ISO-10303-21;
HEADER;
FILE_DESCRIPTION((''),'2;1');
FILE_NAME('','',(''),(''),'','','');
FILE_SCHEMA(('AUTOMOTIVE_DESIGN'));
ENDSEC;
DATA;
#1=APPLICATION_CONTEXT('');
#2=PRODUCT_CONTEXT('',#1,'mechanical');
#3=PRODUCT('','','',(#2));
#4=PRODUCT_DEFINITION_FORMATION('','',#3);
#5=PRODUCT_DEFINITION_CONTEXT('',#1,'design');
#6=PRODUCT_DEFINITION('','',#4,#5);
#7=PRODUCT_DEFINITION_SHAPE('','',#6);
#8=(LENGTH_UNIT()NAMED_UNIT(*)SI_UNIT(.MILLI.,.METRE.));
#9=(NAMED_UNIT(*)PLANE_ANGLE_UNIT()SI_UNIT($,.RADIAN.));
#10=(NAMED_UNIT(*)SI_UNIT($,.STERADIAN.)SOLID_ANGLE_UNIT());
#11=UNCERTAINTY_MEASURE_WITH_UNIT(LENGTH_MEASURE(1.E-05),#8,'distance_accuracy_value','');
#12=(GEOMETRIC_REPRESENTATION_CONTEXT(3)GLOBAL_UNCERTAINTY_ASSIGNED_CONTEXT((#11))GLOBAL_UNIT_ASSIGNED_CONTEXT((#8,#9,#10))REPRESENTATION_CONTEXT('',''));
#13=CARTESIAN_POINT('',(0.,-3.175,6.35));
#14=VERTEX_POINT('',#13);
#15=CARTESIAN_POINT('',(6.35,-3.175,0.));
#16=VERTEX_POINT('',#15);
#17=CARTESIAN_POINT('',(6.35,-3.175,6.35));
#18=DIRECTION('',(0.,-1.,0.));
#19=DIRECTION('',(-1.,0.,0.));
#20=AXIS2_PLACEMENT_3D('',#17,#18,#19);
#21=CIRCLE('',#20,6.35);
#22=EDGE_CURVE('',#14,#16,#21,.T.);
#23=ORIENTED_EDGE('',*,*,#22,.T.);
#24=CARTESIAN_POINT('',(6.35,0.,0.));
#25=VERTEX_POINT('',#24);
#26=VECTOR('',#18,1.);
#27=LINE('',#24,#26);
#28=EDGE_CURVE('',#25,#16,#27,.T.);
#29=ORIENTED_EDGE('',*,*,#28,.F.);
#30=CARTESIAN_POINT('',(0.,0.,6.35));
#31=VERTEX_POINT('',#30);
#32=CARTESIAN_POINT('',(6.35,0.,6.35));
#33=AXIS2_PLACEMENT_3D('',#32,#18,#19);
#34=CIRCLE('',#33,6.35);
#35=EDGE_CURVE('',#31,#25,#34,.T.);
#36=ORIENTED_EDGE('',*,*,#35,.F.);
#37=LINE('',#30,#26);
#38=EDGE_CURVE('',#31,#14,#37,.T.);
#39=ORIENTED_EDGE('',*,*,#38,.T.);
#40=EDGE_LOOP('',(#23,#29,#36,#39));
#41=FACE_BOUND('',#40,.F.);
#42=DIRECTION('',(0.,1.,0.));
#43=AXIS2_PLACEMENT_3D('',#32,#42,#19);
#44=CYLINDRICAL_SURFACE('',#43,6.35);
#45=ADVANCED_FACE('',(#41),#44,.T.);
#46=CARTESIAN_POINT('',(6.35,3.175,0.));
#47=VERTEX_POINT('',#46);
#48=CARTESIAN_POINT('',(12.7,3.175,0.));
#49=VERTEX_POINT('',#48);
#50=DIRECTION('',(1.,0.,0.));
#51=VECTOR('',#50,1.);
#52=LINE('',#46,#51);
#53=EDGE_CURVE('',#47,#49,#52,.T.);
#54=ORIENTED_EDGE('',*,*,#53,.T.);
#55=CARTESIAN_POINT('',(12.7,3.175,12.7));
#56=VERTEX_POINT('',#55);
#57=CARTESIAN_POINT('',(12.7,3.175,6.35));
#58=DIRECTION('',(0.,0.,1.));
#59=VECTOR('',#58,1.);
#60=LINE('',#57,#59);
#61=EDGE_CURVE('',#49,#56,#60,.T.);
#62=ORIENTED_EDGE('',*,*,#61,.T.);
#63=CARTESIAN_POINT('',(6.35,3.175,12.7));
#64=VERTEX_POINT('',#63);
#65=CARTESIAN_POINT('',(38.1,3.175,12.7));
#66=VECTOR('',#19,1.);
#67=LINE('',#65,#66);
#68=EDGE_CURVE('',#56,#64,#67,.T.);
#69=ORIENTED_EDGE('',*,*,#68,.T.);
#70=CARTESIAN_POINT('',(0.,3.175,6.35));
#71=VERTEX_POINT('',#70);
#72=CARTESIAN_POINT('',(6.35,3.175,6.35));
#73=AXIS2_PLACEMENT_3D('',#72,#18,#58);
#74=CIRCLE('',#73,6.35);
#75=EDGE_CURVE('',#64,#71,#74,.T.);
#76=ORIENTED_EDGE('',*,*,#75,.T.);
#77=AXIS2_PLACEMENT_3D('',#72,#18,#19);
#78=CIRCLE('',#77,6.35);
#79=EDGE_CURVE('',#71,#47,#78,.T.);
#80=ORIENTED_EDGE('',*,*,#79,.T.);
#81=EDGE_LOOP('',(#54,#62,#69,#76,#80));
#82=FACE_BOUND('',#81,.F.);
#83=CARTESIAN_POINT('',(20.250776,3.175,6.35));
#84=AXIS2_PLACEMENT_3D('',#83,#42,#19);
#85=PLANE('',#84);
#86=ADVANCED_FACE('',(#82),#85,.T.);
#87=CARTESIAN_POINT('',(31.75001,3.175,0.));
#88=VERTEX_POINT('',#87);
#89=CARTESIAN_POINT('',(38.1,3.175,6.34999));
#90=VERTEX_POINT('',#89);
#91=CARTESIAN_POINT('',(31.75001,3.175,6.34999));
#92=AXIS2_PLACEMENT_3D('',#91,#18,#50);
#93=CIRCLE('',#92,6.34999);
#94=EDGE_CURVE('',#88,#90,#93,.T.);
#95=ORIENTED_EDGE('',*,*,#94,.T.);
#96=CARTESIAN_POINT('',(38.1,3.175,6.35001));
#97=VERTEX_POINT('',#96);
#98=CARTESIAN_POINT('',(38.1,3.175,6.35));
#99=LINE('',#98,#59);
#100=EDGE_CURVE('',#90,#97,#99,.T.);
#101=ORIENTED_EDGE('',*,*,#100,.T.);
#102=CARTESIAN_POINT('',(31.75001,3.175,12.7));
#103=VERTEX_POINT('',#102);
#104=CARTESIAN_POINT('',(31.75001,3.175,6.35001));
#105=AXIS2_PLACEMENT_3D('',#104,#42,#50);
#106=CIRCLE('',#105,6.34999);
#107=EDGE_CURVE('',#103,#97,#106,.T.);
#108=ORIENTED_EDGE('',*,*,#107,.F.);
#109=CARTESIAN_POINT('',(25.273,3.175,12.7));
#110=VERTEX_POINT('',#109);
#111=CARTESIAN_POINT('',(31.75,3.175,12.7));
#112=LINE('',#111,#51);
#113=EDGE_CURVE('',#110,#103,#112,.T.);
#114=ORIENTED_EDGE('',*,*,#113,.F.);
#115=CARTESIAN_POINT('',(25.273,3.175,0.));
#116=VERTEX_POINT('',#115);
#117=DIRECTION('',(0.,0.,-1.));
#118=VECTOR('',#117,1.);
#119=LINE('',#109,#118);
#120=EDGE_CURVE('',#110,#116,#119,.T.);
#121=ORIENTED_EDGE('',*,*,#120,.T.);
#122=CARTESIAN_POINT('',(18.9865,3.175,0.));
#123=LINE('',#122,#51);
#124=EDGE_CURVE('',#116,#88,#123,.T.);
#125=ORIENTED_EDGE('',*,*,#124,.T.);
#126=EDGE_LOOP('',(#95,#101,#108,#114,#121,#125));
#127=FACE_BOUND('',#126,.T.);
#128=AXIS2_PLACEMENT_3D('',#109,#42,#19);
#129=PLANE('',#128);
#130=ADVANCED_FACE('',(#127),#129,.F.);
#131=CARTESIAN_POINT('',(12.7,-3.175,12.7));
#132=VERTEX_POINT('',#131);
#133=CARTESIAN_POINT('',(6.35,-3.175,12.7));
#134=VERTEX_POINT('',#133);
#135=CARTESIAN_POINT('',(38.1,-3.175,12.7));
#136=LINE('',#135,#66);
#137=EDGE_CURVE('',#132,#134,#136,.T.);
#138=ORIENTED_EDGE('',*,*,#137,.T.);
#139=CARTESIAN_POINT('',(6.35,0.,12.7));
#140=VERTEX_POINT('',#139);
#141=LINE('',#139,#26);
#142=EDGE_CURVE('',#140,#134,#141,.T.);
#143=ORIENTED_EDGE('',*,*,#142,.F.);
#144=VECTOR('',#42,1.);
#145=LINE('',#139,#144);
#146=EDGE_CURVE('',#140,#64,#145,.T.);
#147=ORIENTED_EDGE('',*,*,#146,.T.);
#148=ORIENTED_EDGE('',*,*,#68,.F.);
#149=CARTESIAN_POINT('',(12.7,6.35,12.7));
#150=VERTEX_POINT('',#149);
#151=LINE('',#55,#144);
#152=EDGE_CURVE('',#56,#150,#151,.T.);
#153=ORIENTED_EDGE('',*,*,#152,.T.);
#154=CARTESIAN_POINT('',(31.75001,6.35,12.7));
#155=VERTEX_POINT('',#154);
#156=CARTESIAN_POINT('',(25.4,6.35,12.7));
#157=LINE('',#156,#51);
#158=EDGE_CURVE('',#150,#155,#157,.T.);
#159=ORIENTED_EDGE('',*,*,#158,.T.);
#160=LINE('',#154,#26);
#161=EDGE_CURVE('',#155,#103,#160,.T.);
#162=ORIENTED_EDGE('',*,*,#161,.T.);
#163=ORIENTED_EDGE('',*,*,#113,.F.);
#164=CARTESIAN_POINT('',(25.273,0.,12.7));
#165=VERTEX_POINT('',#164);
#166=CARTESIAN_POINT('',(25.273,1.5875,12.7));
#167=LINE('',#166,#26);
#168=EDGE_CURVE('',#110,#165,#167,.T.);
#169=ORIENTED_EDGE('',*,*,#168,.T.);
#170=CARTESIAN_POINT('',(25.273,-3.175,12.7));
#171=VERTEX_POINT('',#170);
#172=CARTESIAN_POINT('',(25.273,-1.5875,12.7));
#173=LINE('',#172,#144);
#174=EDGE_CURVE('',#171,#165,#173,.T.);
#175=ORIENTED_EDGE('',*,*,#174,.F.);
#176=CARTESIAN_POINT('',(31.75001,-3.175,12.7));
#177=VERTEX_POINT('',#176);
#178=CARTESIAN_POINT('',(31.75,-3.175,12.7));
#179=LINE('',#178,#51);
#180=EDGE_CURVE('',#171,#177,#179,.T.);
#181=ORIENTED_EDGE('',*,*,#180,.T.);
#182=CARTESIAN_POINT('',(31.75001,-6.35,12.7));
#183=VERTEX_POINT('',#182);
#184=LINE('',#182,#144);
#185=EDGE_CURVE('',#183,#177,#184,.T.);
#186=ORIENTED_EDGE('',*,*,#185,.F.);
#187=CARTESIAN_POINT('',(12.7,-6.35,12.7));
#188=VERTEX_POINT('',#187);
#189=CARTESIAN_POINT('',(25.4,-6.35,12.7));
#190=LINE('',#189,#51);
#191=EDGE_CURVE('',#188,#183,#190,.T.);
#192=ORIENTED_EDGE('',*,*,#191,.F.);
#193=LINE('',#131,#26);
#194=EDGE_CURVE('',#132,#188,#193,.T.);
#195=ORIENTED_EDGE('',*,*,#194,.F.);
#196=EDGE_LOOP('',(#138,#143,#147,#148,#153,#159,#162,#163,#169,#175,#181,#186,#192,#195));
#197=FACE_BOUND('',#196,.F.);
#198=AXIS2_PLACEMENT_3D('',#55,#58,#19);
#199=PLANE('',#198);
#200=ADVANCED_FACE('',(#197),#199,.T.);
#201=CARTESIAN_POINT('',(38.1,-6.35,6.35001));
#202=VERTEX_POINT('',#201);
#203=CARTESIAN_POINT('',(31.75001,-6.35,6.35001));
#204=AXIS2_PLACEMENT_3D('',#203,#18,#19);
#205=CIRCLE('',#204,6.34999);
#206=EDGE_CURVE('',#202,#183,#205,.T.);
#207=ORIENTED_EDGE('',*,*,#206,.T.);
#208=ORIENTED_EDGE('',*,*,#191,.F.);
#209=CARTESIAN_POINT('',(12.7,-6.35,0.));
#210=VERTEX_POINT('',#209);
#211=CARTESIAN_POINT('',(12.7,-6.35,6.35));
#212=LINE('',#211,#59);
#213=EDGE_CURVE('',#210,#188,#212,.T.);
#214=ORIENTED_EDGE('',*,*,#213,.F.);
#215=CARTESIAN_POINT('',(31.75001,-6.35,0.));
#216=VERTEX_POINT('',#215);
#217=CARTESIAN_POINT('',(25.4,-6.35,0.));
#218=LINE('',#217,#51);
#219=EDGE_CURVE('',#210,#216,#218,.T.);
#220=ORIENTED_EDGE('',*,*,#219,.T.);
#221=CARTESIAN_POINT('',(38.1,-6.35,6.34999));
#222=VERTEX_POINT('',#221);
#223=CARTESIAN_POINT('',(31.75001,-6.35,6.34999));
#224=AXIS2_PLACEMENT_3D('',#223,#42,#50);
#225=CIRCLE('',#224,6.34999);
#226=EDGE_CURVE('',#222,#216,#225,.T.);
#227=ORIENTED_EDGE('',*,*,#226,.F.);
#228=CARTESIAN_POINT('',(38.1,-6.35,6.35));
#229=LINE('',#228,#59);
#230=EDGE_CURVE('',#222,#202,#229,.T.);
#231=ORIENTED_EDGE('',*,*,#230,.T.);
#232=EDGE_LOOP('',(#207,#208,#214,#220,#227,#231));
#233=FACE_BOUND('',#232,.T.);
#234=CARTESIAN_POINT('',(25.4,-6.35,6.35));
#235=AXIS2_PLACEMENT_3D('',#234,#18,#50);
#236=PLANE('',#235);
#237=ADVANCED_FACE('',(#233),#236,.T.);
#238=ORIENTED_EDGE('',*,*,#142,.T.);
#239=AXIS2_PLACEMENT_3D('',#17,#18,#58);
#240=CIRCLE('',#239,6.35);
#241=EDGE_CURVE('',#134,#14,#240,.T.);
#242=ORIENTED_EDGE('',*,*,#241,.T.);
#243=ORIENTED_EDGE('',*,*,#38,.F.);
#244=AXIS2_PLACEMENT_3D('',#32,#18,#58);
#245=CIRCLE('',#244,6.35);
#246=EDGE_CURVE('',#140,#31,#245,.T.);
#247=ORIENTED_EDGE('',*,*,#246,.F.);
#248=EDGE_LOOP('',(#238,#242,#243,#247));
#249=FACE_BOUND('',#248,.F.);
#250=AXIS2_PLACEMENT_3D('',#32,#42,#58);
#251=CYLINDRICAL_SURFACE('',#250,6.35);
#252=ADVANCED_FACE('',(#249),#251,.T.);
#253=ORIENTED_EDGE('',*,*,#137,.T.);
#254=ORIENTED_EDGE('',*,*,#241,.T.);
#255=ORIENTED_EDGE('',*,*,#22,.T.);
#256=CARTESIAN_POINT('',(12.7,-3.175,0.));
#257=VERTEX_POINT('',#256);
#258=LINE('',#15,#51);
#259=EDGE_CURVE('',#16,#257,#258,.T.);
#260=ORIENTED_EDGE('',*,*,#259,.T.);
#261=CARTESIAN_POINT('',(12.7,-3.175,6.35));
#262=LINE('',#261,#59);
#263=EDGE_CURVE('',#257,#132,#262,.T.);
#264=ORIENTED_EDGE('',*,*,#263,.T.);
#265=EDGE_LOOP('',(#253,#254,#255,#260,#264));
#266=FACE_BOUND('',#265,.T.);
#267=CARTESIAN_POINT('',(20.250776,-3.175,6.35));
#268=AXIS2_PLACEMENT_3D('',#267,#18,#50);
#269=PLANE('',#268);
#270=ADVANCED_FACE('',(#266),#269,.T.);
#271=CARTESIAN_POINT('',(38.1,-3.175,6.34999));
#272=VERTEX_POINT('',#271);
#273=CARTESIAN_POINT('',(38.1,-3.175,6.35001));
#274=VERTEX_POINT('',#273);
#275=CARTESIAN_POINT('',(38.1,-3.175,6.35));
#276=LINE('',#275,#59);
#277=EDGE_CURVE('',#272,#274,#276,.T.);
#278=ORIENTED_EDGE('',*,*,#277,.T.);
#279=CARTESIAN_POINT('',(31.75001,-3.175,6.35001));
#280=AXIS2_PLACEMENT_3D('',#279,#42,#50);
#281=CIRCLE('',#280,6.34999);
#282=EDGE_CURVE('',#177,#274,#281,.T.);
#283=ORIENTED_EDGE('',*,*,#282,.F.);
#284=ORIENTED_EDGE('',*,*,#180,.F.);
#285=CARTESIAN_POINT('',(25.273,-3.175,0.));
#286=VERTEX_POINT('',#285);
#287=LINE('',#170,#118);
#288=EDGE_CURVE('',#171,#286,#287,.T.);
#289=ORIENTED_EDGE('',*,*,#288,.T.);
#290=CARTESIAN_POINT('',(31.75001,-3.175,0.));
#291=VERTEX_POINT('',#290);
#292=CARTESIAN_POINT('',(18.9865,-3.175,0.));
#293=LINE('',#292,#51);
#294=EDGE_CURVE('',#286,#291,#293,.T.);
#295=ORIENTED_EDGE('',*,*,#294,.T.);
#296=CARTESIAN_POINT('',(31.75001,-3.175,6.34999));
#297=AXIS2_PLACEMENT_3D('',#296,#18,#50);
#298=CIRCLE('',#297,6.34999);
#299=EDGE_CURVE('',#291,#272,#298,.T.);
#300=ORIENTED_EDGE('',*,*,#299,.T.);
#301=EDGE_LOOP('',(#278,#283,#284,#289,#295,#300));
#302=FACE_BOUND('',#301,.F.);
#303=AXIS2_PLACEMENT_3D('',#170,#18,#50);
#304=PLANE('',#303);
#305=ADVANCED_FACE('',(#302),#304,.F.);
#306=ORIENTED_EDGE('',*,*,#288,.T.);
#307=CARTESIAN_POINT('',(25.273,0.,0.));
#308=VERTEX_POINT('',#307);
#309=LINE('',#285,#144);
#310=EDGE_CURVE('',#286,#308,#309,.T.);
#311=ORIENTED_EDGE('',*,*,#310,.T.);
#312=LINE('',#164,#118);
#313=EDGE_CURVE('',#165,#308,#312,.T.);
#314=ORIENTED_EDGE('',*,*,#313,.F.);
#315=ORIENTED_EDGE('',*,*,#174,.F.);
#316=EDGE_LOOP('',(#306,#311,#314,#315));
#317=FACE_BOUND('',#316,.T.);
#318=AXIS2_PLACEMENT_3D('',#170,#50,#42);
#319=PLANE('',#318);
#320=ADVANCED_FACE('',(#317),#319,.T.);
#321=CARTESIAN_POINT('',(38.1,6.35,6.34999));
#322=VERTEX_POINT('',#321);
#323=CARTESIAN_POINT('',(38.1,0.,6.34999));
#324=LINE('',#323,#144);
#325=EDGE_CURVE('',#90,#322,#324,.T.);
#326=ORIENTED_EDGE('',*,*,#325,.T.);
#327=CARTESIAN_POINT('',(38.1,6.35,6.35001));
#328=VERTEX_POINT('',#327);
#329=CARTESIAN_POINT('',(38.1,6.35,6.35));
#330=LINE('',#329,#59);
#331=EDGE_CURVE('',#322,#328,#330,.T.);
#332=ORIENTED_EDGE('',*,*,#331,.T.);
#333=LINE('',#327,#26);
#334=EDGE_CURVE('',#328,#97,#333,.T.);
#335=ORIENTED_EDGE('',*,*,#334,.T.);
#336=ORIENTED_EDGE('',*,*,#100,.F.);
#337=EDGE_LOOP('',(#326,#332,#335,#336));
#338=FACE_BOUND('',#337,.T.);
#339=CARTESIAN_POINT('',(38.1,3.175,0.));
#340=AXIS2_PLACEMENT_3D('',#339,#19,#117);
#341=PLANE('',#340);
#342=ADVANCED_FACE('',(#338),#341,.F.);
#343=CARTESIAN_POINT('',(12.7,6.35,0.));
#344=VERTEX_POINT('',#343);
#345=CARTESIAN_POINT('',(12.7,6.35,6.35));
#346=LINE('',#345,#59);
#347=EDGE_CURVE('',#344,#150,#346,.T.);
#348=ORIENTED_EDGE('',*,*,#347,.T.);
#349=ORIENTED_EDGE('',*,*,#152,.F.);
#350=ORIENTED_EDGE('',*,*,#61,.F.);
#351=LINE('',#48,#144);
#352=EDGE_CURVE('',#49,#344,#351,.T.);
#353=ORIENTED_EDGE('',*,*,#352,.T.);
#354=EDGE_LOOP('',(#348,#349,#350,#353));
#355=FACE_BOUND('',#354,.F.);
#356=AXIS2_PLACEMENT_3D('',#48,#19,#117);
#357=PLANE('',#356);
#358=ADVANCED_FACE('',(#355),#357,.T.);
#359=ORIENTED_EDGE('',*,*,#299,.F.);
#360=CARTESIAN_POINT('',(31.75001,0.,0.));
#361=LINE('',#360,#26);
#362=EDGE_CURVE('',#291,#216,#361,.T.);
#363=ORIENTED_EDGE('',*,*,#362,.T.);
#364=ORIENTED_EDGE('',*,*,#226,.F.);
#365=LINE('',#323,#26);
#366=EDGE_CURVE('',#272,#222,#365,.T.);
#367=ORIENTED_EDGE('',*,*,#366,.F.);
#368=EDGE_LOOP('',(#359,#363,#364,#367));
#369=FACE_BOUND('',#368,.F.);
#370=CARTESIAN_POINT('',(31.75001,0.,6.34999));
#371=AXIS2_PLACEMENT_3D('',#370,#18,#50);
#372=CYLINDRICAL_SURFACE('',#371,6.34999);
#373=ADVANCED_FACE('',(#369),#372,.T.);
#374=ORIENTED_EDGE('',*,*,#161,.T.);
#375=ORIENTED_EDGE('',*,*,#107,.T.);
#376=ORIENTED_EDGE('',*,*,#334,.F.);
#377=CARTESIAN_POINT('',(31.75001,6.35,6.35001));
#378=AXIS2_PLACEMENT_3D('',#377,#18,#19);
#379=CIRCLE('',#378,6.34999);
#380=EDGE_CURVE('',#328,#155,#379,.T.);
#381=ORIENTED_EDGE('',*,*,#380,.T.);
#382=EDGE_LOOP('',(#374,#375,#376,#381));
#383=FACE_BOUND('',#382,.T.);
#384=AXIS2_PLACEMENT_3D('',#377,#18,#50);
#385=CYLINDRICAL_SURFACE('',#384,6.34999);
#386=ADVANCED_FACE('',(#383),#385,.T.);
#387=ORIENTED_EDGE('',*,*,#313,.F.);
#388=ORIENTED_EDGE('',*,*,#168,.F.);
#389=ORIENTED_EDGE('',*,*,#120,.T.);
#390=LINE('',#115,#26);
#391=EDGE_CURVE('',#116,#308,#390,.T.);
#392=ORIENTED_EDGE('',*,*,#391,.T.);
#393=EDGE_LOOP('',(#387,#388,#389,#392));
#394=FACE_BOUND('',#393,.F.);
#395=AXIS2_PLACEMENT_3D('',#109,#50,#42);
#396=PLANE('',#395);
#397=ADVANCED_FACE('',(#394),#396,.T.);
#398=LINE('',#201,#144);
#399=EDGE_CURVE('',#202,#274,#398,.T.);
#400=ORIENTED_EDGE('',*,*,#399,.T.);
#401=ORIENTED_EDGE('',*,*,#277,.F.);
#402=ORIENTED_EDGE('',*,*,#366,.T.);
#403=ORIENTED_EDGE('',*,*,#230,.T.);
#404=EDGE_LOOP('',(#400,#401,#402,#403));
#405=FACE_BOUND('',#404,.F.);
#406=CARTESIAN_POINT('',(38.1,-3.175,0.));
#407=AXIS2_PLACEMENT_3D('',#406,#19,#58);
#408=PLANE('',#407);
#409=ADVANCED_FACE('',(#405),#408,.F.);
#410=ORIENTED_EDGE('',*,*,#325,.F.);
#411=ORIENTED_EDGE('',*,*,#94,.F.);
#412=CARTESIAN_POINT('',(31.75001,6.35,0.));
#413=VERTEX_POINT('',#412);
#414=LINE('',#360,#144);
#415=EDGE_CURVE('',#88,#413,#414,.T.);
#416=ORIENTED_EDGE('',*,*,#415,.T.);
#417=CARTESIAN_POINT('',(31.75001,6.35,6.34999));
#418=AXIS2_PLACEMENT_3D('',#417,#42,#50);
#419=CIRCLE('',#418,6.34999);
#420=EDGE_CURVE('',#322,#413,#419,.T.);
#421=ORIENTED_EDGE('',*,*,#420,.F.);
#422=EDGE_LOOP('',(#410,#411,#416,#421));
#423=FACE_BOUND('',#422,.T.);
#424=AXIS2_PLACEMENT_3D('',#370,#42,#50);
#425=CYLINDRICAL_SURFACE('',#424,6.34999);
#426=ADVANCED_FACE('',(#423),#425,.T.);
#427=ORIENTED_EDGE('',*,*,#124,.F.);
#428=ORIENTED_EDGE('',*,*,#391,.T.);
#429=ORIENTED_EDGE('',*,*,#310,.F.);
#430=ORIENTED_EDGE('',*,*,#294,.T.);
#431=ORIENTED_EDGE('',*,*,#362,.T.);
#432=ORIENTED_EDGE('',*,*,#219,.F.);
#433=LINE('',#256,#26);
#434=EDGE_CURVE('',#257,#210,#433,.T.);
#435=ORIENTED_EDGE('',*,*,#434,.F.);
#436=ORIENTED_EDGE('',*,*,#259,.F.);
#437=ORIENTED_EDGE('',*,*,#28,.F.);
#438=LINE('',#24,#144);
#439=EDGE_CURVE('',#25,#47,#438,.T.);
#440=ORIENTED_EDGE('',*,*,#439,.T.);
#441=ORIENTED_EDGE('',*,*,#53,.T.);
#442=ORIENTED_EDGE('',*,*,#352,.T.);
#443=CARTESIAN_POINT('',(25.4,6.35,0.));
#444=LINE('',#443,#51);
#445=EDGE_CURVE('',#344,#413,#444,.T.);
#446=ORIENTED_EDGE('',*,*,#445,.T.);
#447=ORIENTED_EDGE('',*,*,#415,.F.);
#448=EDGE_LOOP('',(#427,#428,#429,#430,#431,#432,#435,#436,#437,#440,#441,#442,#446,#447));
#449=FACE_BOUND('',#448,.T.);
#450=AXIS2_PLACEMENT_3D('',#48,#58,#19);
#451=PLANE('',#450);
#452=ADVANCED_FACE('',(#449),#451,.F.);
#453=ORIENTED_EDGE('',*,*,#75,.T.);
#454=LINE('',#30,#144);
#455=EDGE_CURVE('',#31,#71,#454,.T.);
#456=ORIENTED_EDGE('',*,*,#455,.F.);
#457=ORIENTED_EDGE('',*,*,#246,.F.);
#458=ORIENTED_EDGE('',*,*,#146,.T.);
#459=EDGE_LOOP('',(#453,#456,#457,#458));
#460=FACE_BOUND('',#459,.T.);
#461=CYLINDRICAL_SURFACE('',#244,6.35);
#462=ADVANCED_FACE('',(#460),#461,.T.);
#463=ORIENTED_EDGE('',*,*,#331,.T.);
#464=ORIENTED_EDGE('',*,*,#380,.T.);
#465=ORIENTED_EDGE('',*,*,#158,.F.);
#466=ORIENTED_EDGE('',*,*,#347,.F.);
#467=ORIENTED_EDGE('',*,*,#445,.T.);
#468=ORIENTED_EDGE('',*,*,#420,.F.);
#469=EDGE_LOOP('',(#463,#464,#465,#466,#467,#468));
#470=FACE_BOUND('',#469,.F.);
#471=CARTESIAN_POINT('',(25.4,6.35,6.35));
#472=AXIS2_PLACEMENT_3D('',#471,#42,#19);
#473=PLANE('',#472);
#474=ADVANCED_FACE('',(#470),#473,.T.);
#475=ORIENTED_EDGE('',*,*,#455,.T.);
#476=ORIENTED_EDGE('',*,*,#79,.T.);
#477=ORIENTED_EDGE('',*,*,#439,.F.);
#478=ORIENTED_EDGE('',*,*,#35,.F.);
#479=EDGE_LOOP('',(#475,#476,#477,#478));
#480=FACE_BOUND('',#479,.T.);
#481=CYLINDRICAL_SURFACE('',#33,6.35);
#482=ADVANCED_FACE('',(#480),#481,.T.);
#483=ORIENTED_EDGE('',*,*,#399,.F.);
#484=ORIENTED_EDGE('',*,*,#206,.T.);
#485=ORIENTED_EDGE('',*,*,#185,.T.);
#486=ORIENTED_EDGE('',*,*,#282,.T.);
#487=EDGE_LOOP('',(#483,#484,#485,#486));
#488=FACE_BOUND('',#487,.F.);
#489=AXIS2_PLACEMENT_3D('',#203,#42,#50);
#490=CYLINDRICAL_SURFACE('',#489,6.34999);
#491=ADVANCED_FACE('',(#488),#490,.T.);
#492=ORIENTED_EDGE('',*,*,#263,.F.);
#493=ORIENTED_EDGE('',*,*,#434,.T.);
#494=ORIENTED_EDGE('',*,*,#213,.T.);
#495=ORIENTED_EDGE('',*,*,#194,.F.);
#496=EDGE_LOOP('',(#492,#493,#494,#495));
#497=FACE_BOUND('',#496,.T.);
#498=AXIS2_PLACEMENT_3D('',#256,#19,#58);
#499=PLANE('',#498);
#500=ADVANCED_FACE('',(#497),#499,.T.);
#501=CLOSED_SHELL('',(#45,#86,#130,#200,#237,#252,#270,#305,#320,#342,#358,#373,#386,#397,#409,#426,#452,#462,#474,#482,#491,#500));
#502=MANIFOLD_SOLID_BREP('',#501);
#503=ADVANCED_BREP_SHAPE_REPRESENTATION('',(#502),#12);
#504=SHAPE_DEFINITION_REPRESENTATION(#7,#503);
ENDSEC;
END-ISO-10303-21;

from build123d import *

# Parameters (mm, degrees)
F1_DEPTH = 3.175
F2_W     = 25.4
F2_H     = 12.7
F3_DEPTH = 3.175
F4_R     = 6.34999
F5_W     = 12.954
F5_H     = 3.175
F6_DEPTH = 25.4


# Not quite as in the source:
# - a fillet or chamfer is up to 0.001 mm smaller than in the source, because OpenCascade refuses the exact size


with BuildPart() as f1:
    # F0 (on Front) → F1 (new body)
    with BuildSketch(Plane.XZ):
        with BuildLine():
            ThreePointArc((0, 6.35), (1.8598719395, 1.8598719395), (6.35, 0))
            Line((6.35, 0), (38.1, 0))
            Line((38.1, 0), (38.1, 12.7))
            Line((38.1, 12.7), (6.35, 12.7))
            ThreePointArc((6.35, 12.7), (1.8598719395, 10.8401280605), (0, 6.35))
        make_face()
    extrude(amount=F1_DEPTH)

    # F2 (on face) → F3 (join)
    with BuildSketch(Plane.XZ.offset(3.175)):
        with Locations((25.4, 6.35)):
            Rectangle(F2_W, F2_H)
    extrude(amount=F3_DEPTH)

    # F4 (radius 6.35 in the source; OpenCascade refuses exactly that, so slightly less here)
    f4_edges = [f1.edges().sort_by_distance(p)[0] for p in [
        (38.1, -3.175, 12.7),
        (38.1, -3.175, 0),
    ]]
    fillet(f4_edges, radius=F4_R)

    # F5 (on face) → F6 (cut)
    with BuildSketch(Plane.XY.offset(12.7)):
        with Locations((31.75, -1.5875)):
            Rectangle(F5_W, F5_H)
    extrude(amount=-F6_DEPTH, mode=Mode.SUBTRACT)

    # F7: F1 across face


with BuildPart() as f1_1:
    add(f1.part)
    add(f1.part.mirror(Plane(origin=(13.2758554346, 0, 6.35), x_dir=(1, 0, 0), z_dir=(0, 1, 0))))


solid = f1_1.part
